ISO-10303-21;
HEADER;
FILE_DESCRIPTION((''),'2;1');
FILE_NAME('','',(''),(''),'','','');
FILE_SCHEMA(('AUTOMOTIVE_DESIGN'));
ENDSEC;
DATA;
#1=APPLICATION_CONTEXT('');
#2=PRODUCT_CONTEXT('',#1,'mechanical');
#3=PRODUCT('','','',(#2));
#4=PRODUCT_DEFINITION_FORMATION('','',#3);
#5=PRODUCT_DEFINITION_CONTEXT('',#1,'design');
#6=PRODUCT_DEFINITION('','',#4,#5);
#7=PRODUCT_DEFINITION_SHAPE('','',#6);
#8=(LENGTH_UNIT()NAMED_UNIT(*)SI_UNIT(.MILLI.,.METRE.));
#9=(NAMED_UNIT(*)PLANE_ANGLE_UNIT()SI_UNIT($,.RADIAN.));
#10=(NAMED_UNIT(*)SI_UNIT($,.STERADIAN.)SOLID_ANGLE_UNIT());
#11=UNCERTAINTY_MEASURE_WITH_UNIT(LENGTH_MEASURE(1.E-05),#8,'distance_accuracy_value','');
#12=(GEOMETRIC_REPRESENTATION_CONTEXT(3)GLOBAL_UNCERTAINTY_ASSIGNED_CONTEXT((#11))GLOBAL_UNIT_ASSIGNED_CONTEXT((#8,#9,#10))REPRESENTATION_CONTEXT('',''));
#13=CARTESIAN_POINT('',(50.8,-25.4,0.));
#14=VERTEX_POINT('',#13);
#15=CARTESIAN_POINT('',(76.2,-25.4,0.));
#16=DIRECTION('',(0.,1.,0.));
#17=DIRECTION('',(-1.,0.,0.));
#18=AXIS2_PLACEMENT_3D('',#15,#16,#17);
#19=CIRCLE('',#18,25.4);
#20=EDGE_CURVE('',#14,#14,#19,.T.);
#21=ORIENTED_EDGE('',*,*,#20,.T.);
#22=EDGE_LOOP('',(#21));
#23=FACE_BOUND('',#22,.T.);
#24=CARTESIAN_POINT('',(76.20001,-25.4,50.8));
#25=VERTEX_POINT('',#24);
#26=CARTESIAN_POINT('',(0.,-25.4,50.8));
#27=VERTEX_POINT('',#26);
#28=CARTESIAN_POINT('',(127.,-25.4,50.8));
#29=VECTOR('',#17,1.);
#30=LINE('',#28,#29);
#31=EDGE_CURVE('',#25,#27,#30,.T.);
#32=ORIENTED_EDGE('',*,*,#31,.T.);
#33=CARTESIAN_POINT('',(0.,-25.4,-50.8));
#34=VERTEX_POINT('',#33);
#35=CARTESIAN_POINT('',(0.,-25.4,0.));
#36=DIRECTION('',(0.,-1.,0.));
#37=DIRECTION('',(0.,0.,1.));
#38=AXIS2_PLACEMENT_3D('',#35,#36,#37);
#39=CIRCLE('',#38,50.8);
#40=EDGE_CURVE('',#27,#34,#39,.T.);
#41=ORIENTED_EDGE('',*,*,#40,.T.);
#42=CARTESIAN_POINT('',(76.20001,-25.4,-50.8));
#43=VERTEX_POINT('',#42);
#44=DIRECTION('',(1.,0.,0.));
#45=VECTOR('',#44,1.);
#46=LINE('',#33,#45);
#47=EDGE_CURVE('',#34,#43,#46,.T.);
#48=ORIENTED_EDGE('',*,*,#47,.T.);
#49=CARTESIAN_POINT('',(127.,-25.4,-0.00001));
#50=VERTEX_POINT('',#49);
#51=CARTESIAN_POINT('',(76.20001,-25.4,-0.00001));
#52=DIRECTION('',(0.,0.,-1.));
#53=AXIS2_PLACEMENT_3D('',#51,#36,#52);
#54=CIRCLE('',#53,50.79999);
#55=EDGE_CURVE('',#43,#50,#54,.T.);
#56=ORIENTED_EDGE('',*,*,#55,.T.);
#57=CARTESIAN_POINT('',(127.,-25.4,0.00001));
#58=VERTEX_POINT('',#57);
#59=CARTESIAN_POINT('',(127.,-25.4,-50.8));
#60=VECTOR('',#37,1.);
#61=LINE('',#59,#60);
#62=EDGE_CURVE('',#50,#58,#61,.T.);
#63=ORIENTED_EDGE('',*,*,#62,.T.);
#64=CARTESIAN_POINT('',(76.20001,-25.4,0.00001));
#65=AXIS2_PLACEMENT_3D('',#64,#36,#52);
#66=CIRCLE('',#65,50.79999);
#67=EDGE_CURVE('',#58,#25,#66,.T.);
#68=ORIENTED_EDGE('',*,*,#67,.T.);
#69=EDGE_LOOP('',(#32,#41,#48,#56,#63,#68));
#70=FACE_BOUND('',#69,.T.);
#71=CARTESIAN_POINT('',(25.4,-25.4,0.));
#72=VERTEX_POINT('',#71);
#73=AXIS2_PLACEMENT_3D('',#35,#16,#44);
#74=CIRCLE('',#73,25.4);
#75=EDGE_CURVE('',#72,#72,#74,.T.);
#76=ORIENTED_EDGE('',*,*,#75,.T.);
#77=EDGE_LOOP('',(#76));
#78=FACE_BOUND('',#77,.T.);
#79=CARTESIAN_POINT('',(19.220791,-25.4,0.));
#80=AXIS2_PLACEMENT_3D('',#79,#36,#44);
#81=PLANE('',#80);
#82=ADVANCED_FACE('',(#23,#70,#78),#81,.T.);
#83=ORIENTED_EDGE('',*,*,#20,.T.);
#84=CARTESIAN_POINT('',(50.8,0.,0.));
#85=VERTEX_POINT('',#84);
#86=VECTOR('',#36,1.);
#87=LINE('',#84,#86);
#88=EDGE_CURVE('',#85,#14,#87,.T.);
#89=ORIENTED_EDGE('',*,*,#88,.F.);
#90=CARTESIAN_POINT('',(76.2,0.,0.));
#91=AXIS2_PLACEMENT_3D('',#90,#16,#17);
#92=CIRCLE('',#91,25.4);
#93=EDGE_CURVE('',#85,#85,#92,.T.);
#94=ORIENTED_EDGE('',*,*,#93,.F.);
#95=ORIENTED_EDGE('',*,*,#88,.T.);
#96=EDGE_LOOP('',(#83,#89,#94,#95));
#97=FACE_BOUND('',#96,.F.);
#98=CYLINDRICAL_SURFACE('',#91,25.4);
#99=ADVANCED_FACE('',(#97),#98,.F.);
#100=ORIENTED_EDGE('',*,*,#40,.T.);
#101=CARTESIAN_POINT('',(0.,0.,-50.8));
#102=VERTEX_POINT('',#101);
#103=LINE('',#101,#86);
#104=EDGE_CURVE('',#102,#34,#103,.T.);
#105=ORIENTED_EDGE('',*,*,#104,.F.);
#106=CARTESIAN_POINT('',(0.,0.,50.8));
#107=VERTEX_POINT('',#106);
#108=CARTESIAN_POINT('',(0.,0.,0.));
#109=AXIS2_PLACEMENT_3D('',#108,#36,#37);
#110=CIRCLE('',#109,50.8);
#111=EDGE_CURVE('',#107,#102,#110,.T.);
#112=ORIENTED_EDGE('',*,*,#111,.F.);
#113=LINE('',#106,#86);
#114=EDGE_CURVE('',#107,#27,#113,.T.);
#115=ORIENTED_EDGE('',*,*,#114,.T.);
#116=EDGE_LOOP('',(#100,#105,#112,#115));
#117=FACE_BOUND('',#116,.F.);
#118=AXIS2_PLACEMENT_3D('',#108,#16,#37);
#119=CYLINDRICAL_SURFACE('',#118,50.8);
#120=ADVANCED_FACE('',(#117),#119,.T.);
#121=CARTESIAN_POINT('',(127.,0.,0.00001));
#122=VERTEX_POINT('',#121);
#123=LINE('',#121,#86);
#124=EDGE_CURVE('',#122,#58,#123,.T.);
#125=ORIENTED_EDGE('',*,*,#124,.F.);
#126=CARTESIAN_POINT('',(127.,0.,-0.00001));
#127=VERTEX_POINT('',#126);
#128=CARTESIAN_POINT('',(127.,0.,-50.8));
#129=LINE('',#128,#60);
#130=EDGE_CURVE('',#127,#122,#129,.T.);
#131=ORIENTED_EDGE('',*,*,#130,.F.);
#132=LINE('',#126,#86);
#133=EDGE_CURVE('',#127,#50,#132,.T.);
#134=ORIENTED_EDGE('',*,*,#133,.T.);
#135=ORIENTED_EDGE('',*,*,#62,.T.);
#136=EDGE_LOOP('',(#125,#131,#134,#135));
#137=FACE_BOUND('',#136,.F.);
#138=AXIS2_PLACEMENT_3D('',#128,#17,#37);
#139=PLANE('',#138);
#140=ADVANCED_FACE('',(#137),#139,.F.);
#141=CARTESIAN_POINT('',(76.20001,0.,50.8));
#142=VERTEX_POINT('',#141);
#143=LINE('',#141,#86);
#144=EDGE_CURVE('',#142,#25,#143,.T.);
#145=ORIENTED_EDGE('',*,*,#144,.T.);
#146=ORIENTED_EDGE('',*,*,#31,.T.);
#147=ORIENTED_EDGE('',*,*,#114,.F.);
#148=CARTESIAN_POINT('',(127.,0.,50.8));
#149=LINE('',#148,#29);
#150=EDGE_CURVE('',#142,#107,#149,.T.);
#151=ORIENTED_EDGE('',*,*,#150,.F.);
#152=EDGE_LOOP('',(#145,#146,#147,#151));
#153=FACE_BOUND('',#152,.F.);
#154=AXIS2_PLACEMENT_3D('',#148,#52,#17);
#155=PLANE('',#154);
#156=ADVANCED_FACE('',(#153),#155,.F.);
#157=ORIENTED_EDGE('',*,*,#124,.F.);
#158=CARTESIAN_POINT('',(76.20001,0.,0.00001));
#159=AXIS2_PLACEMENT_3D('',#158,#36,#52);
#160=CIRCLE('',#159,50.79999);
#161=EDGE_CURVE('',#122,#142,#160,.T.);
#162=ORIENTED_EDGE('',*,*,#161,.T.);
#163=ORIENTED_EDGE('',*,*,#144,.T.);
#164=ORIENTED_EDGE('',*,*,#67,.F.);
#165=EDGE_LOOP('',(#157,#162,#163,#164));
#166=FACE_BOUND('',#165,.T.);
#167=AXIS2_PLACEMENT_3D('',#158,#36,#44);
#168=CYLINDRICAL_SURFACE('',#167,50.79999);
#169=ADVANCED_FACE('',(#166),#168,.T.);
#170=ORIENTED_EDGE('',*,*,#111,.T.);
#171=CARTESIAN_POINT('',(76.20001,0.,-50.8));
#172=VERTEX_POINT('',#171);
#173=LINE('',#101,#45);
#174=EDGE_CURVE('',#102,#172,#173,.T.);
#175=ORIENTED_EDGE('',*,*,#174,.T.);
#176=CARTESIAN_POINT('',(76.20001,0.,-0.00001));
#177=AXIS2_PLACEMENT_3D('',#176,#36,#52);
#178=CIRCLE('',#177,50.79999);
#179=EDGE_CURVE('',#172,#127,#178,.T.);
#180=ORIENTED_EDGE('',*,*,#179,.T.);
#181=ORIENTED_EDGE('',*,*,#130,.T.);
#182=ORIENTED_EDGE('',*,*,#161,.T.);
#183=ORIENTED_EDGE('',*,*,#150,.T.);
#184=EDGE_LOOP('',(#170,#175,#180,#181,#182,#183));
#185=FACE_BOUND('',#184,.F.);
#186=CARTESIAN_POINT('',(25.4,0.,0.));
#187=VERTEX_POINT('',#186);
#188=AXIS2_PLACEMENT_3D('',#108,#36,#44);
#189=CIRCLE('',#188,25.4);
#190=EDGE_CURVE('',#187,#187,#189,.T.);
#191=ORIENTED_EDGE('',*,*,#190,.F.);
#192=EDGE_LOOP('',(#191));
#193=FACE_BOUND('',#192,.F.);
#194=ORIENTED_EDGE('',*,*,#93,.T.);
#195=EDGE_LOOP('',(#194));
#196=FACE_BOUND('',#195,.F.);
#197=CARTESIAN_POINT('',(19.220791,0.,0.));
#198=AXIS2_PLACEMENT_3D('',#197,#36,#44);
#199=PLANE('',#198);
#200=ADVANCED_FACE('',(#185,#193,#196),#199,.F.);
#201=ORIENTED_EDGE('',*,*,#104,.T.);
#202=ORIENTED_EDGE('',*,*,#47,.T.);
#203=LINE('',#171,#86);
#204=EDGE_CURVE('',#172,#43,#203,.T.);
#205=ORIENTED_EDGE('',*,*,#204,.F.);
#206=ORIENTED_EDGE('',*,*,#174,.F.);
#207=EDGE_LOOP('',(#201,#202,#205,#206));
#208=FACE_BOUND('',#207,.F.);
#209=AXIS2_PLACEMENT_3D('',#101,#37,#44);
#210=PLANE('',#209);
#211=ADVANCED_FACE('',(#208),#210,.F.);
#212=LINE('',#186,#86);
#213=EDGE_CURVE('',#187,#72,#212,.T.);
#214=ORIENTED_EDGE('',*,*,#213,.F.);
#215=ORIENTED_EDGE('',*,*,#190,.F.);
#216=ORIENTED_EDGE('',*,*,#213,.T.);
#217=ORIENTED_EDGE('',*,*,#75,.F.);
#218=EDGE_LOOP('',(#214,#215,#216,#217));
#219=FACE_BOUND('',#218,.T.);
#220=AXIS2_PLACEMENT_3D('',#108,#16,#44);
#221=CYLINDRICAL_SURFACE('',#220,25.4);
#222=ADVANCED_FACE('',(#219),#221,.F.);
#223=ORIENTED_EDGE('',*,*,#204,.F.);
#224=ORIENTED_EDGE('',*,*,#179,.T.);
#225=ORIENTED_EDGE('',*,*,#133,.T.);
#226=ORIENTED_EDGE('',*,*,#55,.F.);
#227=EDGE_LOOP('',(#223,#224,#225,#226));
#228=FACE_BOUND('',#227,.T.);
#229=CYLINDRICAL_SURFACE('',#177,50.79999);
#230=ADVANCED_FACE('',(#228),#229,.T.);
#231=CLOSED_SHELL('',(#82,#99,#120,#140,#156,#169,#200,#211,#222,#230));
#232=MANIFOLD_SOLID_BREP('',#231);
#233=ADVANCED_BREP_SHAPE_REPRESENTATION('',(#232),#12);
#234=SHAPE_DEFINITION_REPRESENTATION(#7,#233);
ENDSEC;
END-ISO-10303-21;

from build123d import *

# Parameters (mm, degrees)
F1_DEPTH = 25.4
F2_R     = 50.79999
F3_R     = 25.4
F4_DEPTH = 79.248


# Not quite as in the source:
# - a fillet or chamfer is up to 0.001 mm smaller than in the source, because OpenCascade refuses the exact size


with BuildPart() as f1:
    # F0 (on Front) → F1 (new body)
    with BuildSketch(Plane.XZ):
        with BuildLine():
            ThreePointArc((0, -50.8), (35.9210244843, -35.9210244843), (50.8, 0))
            ThreePointArc((50.8, 0), (35.9210244843, 35.9210244843), (0, 50.8))
            Line((0, 50.8), (0, -50.8))
        make_face()
        with BuildLine():
            ThreePointArc((0, 50.8), (35.9210244843, 35.9210244843), (50.8, 0))
            ThreePointArc((50.8, 0), (35.9210244843, -35.9210244843), (0, -50.8))
            Line((0, -50.8), (127, -50.8))
            Line((127, -50.8), (127, 50.8))
            Line((127, 50.8), (0, 50.8))
        make_face()
        with BuildLine():
            Line((0, -50.8), (0, 50.8))
            ThreePointArc((0, 50.8), (-50.8, 0), (0, -50.8))
        make_face()
    extrude(amount=F1_DEPTH)

    # F2 (radius 50.8 in the source; OpenCascade refuses exactly that, so slightly less here)
    f2_edges = [f1.edges().sort_by_distance(p)[0] for p in [
        (127, -12.7, 50.8),
        (127, -12.7, -50.8),
    ]]
    fillet(f2_edges, radius=F2_R)

    # F3 (on Front) → F4 (cut)
    with BuildSketch(Plane.XZ):
        Circle(F3_R)
    f4 = extrude(amount=F4_DEPTH, mode=Mode.SUBTRACT)

    # F7: F4 across plane
    add(f4.mirror(Plane.YZ.offset(38.1)), mode=Mode.SUBTRACT)


solid = f1.part
